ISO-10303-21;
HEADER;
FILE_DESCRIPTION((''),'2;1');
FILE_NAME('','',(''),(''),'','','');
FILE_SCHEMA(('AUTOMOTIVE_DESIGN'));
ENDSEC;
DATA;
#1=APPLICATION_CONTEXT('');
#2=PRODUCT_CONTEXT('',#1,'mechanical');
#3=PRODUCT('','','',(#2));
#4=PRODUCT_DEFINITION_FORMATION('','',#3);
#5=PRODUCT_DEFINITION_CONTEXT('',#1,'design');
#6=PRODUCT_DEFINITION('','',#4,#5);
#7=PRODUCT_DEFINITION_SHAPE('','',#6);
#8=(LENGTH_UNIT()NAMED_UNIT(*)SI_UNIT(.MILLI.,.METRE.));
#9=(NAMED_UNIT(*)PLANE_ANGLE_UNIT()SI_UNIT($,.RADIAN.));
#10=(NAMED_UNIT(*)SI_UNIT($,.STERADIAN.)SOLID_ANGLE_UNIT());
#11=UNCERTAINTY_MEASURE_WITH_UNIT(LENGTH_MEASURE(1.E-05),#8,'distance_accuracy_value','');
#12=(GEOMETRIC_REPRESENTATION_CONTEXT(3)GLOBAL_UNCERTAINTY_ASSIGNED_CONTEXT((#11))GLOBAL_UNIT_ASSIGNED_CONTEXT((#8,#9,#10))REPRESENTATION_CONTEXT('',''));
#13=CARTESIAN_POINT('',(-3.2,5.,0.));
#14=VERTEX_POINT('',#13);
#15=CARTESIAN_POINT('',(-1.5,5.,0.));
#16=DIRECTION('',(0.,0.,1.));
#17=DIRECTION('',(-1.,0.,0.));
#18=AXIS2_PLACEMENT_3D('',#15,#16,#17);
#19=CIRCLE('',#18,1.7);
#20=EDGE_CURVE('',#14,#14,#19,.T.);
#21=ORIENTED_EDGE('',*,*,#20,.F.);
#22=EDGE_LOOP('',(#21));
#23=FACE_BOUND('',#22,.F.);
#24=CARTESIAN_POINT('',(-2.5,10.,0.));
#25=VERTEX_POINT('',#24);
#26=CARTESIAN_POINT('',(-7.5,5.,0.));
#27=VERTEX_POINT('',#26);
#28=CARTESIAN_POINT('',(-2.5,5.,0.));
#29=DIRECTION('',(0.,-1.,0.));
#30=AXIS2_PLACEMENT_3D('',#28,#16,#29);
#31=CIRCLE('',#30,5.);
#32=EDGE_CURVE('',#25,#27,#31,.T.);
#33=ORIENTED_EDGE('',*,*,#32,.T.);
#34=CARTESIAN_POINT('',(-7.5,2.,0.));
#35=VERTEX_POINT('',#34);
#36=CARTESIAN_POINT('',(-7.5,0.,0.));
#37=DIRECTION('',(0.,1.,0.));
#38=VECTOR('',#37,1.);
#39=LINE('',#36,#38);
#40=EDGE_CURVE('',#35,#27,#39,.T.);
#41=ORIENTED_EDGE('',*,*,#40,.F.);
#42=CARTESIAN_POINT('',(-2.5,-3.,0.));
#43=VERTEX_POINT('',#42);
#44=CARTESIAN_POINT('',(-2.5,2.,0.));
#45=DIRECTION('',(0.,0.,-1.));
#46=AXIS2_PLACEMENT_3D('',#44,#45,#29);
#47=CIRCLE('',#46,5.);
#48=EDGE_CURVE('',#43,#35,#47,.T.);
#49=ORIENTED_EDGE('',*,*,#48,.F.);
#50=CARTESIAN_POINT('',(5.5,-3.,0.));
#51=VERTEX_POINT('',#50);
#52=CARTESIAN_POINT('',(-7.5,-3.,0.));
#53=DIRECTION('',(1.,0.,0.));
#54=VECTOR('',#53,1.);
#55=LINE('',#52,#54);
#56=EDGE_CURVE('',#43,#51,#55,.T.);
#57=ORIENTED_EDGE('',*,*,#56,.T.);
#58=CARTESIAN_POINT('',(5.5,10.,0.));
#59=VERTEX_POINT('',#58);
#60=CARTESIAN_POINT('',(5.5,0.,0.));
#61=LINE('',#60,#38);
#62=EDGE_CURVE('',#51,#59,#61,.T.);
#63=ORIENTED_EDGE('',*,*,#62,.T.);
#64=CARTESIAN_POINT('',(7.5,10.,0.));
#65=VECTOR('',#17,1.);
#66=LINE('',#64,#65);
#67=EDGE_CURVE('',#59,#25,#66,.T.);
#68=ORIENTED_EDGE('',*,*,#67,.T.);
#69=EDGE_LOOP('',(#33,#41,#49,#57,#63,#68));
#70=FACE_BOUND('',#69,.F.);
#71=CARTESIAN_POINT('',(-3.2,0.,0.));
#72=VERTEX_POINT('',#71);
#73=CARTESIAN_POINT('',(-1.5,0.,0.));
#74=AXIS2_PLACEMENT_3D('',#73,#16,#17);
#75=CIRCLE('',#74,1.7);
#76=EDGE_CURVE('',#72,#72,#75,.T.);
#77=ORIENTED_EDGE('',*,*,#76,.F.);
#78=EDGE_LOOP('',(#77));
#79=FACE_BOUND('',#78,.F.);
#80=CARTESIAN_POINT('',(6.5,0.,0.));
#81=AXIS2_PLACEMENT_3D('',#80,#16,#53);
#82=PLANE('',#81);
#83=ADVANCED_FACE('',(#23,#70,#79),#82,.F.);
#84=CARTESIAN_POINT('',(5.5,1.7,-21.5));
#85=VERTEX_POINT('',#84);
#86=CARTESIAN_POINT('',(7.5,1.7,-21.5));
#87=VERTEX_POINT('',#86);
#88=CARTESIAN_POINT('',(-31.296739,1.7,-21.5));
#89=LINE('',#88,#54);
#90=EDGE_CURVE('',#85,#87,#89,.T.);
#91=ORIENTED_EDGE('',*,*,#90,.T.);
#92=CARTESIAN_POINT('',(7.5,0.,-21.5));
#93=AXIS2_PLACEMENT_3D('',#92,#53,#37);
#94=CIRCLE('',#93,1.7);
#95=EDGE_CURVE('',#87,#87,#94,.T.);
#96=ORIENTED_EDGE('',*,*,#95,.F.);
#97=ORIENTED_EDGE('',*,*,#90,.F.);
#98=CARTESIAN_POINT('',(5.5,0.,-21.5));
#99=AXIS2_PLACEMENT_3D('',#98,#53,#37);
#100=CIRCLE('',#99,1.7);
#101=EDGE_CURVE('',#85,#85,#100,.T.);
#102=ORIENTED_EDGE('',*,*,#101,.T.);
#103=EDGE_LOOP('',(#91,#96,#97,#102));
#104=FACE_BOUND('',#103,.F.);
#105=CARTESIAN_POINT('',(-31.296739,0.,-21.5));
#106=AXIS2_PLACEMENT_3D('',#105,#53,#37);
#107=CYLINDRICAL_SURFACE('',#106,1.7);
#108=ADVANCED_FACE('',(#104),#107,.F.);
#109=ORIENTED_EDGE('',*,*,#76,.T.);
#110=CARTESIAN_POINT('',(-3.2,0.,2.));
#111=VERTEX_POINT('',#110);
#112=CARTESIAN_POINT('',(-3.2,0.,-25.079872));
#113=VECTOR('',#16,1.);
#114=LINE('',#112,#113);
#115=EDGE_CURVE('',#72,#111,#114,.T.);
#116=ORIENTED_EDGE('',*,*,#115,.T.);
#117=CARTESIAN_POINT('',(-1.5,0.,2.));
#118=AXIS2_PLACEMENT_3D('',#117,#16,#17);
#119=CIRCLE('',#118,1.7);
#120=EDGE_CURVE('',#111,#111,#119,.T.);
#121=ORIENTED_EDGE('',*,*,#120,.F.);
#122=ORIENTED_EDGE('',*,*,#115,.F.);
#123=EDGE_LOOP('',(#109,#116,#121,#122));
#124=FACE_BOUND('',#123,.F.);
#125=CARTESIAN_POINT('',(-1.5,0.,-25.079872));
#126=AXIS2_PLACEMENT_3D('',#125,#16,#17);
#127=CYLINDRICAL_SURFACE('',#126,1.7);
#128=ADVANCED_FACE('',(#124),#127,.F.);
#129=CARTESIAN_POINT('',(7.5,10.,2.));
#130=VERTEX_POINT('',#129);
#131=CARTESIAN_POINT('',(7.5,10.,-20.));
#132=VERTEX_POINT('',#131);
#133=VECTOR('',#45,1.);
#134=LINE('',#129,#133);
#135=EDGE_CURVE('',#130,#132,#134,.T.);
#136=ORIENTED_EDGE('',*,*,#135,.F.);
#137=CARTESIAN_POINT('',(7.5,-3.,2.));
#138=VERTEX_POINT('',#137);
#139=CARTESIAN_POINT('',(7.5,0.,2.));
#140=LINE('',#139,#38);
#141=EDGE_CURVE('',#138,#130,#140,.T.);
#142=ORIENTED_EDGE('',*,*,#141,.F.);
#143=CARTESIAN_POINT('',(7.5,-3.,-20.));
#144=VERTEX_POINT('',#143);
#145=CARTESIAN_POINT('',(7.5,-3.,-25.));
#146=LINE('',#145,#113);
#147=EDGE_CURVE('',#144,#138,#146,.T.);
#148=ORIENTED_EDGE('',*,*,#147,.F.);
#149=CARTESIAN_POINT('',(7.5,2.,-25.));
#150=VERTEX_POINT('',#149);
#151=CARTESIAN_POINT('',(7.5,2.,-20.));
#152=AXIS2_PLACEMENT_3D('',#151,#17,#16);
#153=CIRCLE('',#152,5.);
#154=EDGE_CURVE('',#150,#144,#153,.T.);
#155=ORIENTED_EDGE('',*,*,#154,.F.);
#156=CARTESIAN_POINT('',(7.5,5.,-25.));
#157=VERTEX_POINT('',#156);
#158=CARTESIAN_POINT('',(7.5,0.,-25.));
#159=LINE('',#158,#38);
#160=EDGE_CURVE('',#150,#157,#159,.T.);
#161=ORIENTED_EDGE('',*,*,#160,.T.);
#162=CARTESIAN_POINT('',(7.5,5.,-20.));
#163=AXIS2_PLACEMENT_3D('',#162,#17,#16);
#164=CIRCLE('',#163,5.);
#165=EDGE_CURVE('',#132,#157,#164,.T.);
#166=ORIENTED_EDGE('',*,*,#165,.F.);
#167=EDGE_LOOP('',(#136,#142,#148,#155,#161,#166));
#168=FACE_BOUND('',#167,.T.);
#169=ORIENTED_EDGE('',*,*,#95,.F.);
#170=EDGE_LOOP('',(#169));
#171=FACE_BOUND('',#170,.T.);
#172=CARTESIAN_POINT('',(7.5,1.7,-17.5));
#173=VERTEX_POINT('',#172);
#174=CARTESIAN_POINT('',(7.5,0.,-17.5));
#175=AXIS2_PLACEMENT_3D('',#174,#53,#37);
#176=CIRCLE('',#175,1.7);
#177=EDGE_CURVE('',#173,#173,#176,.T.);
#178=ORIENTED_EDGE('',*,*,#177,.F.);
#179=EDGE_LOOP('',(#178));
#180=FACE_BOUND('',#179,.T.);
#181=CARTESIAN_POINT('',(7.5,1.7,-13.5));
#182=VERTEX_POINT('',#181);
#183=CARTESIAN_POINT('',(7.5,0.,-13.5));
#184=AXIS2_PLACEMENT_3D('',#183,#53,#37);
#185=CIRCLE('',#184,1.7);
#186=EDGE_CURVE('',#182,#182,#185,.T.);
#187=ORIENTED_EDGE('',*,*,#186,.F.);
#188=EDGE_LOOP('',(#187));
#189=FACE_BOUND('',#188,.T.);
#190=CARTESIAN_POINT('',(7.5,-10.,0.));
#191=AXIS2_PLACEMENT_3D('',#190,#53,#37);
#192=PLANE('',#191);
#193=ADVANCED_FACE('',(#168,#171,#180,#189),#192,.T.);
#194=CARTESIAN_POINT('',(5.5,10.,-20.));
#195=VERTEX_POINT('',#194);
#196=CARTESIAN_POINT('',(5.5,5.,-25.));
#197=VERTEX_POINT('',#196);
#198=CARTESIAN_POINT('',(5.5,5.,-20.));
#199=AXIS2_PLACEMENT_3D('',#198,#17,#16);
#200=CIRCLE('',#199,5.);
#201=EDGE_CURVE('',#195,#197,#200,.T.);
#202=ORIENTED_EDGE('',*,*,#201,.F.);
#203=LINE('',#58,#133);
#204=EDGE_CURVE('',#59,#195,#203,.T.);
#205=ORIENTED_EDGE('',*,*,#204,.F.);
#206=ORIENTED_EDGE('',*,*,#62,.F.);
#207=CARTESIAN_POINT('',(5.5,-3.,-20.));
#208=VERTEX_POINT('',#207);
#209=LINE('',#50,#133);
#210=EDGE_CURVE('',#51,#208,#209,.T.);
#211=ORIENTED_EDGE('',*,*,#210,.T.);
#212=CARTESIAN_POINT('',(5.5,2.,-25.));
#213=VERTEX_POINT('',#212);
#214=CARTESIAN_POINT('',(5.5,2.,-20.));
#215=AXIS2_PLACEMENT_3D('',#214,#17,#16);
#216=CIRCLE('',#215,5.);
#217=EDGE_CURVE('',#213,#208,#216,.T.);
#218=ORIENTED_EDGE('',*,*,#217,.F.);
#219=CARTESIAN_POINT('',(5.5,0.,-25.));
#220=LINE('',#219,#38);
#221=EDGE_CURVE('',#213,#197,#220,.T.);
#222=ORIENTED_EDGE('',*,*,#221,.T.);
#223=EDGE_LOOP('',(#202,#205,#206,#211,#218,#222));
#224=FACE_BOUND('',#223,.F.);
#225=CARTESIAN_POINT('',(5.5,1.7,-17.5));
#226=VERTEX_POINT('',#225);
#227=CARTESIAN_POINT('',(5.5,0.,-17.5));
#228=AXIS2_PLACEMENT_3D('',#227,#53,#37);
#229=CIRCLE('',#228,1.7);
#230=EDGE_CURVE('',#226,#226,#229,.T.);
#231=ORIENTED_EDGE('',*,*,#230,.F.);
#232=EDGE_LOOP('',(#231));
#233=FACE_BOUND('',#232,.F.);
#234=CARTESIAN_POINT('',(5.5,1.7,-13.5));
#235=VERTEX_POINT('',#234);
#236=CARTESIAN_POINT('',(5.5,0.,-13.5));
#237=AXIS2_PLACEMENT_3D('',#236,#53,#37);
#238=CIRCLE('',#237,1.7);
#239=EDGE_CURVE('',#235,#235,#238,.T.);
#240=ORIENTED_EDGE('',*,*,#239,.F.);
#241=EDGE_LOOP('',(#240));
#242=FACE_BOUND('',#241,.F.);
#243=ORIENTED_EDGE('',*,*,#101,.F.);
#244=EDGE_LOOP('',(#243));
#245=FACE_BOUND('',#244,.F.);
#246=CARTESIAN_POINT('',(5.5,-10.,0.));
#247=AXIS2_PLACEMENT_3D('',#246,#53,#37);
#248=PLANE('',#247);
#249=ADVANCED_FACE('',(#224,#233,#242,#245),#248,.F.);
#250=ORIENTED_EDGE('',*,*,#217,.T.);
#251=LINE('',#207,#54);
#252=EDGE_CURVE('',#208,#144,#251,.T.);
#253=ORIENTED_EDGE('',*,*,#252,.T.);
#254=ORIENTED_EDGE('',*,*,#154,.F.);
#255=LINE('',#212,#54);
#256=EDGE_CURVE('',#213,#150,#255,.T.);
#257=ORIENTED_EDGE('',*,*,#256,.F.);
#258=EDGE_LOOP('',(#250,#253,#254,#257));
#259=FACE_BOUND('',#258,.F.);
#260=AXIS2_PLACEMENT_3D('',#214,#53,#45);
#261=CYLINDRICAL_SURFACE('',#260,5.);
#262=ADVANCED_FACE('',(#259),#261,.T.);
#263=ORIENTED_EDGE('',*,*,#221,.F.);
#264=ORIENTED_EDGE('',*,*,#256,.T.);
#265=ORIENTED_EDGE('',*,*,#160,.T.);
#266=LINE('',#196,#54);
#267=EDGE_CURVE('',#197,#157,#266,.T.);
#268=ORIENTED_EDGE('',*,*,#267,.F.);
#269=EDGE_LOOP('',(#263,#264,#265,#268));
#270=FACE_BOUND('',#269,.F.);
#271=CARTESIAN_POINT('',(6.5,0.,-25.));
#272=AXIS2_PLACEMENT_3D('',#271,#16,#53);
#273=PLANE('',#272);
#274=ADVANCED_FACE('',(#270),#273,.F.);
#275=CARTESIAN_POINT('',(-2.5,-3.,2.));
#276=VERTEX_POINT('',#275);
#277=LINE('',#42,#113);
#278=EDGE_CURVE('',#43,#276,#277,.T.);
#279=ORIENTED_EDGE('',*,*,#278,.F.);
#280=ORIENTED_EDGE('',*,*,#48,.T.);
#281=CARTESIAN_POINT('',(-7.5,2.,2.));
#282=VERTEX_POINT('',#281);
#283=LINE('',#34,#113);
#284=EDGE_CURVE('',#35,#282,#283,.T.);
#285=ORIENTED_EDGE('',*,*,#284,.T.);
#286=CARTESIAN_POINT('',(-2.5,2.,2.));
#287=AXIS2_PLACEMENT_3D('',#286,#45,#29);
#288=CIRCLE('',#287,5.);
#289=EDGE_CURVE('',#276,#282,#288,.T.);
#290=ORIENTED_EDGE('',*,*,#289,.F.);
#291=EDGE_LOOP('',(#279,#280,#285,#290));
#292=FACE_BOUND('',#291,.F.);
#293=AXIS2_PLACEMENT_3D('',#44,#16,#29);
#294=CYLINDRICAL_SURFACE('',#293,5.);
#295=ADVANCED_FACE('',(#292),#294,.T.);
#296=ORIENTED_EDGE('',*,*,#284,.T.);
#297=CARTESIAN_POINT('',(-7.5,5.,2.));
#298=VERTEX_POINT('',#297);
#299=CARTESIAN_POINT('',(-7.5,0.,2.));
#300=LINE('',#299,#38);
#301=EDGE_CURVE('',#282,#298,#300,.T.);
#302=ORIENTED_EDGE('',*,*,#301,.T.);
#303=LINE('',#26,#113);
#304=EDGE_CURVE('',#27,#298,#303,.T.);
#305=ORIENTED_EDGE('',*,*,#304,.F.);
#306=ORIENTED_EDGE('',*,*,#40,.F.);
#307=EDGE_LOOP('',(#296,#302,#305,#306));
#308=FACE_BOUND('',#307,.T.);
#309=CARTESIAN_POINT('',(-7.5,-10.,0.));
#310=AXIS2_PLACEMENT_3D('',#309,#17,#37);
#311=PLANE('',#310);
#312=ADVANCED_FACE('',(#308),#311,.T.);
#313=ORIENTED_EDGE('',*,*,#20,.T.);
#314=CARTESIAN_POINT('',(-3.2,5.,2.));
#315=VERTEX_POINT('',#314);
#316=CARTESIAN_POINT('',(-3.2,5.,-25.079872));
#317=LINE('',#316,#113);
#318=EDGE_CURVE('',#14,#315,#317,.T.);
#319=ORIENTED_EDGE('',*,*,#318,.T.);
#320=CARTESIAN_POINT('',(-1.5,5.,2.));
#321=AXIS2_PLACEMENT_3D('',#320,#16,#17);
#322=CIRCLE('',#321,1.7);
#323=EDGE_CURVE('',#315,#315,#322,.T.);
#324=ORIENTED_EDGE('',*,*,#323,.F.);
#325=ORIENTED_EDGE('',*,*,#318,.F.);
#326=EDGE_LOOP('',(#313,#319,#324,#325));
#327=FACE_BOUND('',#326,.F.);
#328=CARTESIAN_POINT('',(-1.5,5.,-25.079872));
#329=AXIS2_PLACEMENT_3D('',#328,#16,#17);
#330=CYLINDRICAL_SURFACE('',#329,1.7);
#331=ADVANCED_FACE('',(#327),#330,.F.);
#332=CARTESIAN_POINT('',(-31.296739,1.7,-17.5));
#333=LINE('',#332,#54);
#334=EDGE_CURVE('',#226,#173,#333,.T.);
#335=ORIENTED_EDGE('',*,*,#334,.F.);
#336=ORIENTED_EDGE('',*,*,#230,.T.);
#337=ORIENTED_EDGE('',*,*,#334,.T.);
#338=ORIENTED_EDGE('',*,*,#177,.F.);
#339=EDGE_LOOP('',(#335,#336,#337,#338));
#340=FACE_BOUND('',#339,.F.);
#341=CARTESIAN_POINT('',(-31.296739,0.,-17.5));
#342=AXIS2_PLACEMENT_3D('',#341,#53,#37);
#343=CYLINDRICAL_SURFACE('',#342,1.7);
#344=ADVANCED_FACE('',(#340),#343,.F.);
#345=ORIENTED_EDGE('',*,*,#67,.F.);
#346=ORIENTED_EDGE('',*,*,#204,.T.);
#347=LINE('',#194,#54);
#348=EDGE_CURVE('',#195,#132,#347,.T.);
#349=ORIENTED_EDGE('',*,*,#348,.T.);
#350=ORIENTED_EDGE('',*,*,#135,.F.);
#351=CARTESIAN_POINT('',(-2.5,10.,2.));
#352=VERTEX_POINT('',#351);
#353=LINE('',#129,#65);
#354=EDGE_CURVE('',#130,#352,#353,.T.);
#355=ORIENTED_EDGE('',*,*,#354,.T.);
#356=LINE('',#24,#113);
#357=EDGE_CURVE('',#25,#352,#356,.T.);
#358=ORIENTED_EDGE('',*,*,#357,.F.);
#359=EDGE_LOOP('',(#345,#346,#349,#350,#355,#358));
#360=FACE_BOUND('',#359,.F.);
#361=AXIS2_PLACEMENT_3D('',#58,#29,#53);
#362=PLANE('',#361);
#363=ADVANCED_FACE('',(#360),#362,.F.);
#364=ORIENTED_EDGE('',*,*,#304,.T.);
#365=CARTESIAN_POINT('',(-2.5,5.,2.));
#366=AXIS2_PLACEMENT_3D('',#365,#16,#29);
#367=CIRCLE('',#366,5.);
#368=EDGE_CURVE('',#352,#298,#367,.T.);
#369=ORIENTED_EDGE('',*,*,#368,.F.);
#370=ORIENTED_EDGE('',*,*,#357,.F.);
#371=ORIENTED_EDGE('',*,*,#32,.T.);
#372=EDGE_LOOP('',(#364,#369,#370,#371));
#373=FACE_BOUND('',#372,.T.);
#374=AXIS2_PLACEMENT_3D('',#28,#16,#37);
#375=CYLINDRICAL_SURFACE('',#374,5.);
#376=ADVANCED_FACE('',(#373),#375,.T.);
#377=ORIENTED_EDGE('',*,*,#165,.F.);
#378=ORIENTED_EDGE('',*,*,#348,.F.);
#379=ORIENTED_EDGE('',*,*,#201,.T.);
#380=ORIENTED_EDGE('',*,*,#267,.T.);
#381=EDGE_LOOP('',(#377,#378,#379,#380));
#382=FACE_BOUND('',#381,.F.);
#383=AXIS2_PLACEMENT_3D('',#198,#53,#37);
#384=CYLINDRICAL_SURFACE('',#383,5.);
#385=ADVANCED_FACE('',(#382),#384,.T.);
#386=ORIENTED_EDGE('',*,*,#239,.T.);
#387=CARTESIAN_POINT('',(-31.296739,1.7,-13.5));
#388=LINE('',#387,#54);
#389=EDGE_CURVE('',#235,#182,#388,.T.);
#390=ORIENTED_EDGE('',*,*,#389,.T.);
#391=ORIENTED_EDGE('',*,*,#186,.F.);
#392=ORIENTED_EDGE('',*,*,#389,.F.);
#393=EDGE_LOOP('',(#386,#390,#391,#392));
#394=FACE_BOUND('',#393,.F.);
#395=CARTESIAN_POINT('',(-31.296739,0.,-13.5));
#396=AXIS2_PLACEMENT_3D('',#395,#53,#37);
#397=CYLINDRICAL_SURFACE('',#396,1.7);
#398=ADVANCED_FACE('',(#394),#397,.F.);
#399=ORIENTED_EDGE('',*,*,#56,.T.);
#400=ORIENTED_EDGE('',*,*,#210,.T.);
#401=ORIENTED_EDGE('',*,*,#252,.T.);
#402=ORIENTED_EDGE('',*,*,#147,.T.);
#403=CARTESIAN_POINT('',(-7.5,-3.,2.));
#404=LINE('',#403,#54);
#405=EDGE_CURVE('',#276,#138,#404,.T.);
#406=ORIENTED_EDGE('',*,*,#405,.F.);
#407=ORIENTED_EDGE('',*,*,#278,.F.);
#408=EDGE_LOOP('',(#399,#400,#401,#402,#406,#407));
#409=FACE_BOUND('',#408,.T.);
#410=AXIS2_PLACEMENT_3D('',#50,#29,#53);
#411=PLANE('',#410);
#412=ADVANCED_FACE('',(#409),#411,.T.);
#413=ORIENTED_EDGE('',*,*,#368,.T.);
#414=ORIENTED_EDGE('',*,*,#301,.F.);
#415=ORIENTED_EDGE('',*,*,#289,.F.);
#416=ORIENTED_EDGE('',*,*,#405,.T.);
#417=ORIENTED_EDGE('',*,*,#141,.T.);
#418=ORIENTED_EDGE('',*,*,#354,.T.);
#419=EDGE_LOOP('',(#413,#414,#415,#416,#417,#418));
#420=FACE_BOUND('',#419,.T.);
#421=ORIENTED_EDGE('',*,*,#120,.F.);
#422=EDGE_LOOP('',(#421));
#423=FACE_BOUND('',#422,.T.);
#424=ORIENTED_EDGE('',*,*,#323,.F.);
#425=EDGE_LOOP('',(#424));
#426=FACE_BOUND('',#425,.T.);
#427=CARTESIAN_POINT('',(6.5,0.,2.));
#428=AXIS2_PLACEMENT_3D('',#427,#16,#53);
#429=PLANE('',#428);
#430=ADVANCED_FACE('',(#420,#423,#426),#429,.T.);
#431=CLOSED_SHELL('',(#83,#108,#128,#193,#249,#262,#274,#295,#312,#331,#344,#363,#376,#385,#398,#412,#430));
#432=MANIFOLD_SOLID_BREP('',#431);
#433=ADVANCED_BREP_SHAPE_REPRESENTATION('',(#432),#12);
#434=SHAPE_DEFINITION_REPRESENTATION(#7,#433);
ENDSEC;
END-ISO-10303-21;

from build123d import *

# Parameters (mm, degrees)
F0_W     = 2
F0_H     = 20
F0_W_2   = 13
F1_DEPTH = 2
F2_D     = 3.4
F3_DEPTH = 25
F5_D     = 3.4
F6_DEPTH = 7
F7_R     = 5


with BuildPart() as f1:
    # F0 (on Top) → F1 (new body)
    with BuildSketch(Plane.XY):
        with Locations((6.5, 0)):
            Rectangle(F0_W, F0_H)
        with Locations((-1, 0)):
            Rectangle(F0_W_2, F0_H)
    extrude(amount=F1_DEPTH)

    # F2 (through all)
    with Locations(Plane(origin=(0, 0, 0), x_dir=(1, 0, 0), z_dir=(0, 0, -1))):
        with Locations((-1.5, -5), (-1.5, 0), (-1.5, 5)):
            Hole(F2_D / 2)

    # F0 (on Top) → F3 (join)
    with BuildSketch(Plane.XY):
        with Locations((6.5, 0)):
            Rectangle(F0_W, F0_H)
    extrude(amount=-F3_DEPTH)

    # F5 (through all)
    with Locations(Plane(origin=(5.5, 0, 0), x_dir=(0, -1, 0), z_dir=(-1, 0, 0))):
        with Locations((0, -17.5), (0, -13.5), (0, -21.5)):
            Hole(F5_D / 2)

    # F6 (cut): a face of the model
    f6_faces = [f1.faces().sort_by_distance(p)[0] for p in [
        (-7.1911310958, -10, 1),
    ]]
    extrude(f6_faces, amount=-F6_DEPTH, mode=Mode.SUBTRACT)

    # F7
    f7_edges = [f1.edges().sort_by_distance(p)[0] for p in [
        (-7.5, -3, 1),
        (-7.5, 10, 1),
        (6.5, 10, -25),
        (6.5, -3, -25),
    ]]
    fillet(f7_edges, radius=F7_R)


solid = f1.part
